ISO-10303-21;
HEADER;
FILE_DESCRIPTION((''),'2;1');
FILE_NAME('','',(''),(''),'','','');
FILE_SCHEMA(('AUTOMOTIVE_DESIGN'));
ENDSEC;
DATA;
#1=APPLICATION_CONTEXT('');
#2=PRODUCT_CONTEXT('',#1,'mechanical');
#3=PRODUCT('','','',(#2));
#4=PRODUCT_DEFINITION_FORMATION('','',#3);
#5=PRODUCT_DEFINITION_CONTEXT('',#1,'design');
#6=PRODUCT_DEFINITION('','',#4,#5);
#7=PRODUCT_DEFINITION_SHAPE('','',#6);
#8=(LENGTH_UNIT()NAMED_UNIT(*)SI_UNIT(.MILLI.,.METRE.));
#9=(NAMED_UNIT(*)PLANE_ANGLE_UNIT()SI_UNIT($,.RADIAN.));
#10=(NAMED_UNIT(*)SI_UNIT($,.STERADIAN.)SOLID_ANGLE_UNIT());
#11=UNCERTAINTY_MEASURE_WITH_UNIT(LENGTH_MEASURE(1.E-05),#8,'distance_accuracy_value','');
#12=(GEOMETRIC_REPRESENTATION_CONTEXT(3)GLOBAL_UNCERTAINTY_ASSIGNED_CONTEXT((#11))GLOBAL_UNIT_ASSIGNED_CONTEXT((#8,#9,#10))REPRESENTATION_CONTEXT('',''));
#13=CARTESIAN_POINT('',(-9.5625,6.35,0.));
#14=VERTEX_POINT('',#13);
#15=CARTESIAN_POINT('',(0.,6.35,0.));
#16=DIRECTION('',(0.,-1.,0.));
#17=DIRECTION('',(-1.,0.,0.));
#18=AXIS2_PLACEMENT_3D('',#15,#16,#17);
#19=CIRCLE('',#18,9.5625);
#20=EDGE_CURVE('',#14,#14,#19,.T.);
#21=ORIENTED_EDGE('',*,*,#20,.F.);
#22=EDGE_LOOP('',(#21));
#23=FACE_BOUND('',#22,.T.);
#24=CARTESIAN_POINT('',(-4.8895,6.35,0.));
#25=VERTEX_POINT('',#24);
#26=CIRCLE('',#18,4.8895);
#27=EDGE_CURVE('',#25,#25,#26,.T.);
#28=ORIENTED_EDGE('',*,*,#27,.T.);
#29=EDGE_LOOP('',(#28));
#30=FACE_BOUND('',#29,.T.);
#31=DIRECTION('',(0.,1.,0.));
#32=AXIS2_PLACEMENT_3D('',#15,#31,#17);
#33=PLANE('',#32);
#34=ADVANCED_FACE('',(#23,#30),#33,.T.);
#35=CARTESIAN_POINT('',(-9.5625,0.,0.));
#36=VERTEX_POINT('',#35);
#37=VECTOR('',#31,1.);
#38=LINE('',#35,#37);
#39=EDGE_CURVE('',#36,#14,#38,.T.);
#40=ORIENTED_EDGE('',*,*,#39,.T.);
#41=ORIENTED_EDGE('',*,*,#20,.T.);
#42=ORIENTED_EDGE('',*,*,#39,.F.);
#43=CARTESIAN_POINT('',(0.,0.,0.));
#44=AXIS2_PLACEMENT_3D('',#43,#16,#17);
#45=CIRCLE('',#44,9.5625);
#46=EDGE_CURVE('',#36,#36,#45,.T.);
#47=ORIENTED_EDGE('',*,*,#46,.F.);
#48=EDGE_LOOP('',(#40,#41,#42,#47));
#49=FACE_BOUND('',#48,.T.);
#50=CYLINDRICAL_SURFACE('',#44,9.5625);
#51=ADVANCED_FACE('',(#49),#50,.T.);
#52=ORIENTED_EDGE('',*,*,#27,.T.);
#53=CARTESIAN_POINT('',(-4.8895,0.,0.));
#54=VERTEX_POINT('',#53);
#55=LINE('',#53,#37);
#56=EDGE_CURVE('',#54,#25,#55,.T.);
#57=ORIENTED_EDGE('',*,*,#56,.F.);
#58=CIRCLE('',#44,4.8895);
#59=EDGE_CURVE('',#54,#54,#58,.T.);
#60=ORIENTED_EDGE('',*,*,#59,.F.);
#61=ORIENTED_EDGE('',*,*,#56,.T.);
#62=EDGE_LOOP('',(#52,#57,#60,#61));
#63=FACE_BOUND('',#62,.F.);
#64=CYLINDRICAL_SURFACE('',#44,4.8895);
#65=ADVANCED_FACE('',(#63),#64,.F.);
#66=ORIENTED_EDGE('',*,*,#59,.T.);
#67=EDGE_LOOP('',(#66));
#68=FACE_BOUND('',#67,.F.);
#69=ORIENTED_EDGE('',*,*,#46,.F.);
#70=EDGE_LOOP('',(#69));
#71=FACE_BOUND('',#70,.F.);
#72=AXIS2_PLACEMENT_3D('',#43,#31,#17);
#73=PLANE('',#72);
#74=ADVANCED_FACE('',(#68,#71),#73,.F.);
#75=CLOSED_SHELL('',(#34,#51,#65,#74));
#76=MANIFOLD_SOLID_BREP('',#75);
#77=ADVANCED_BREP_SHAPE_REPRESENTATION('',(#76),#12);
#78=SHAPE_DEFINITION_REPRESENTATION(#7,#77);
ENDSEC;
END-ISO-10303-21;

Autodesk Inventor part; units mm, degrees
ref_plane "YZ Plane" through (0, 0, 0) normal (1, 0, 0) x (0, 1, 0)
ref_plane "XZ Plane" through (0, 0, 0) normal (0, 1, 0) x (-1, 0, 0)
ref_plane "XY Plane" through (0, 0, 0) normal (0, 0, 1) x (1, 0, 0)
sketch "Sketch1" plane through (0, 0, 0) normal (0, 1, 0) x (-1, 0, 0)
  circle A0 centre (0, 0) radius 4.7625
  circle A1 centre (0, 0) radius 9.5625
  dimension "d0" = 9.525
  dimension "d1" = 4.8
extrude "Extrusion1" add sketch "Sketch1" along normal blind 6.35
offset faces "Size1" outward -0.127 faces at (-4.7471, 4.2333, -0.3832)
properties part number "Apparati Bearing Fit Test -0.005"
